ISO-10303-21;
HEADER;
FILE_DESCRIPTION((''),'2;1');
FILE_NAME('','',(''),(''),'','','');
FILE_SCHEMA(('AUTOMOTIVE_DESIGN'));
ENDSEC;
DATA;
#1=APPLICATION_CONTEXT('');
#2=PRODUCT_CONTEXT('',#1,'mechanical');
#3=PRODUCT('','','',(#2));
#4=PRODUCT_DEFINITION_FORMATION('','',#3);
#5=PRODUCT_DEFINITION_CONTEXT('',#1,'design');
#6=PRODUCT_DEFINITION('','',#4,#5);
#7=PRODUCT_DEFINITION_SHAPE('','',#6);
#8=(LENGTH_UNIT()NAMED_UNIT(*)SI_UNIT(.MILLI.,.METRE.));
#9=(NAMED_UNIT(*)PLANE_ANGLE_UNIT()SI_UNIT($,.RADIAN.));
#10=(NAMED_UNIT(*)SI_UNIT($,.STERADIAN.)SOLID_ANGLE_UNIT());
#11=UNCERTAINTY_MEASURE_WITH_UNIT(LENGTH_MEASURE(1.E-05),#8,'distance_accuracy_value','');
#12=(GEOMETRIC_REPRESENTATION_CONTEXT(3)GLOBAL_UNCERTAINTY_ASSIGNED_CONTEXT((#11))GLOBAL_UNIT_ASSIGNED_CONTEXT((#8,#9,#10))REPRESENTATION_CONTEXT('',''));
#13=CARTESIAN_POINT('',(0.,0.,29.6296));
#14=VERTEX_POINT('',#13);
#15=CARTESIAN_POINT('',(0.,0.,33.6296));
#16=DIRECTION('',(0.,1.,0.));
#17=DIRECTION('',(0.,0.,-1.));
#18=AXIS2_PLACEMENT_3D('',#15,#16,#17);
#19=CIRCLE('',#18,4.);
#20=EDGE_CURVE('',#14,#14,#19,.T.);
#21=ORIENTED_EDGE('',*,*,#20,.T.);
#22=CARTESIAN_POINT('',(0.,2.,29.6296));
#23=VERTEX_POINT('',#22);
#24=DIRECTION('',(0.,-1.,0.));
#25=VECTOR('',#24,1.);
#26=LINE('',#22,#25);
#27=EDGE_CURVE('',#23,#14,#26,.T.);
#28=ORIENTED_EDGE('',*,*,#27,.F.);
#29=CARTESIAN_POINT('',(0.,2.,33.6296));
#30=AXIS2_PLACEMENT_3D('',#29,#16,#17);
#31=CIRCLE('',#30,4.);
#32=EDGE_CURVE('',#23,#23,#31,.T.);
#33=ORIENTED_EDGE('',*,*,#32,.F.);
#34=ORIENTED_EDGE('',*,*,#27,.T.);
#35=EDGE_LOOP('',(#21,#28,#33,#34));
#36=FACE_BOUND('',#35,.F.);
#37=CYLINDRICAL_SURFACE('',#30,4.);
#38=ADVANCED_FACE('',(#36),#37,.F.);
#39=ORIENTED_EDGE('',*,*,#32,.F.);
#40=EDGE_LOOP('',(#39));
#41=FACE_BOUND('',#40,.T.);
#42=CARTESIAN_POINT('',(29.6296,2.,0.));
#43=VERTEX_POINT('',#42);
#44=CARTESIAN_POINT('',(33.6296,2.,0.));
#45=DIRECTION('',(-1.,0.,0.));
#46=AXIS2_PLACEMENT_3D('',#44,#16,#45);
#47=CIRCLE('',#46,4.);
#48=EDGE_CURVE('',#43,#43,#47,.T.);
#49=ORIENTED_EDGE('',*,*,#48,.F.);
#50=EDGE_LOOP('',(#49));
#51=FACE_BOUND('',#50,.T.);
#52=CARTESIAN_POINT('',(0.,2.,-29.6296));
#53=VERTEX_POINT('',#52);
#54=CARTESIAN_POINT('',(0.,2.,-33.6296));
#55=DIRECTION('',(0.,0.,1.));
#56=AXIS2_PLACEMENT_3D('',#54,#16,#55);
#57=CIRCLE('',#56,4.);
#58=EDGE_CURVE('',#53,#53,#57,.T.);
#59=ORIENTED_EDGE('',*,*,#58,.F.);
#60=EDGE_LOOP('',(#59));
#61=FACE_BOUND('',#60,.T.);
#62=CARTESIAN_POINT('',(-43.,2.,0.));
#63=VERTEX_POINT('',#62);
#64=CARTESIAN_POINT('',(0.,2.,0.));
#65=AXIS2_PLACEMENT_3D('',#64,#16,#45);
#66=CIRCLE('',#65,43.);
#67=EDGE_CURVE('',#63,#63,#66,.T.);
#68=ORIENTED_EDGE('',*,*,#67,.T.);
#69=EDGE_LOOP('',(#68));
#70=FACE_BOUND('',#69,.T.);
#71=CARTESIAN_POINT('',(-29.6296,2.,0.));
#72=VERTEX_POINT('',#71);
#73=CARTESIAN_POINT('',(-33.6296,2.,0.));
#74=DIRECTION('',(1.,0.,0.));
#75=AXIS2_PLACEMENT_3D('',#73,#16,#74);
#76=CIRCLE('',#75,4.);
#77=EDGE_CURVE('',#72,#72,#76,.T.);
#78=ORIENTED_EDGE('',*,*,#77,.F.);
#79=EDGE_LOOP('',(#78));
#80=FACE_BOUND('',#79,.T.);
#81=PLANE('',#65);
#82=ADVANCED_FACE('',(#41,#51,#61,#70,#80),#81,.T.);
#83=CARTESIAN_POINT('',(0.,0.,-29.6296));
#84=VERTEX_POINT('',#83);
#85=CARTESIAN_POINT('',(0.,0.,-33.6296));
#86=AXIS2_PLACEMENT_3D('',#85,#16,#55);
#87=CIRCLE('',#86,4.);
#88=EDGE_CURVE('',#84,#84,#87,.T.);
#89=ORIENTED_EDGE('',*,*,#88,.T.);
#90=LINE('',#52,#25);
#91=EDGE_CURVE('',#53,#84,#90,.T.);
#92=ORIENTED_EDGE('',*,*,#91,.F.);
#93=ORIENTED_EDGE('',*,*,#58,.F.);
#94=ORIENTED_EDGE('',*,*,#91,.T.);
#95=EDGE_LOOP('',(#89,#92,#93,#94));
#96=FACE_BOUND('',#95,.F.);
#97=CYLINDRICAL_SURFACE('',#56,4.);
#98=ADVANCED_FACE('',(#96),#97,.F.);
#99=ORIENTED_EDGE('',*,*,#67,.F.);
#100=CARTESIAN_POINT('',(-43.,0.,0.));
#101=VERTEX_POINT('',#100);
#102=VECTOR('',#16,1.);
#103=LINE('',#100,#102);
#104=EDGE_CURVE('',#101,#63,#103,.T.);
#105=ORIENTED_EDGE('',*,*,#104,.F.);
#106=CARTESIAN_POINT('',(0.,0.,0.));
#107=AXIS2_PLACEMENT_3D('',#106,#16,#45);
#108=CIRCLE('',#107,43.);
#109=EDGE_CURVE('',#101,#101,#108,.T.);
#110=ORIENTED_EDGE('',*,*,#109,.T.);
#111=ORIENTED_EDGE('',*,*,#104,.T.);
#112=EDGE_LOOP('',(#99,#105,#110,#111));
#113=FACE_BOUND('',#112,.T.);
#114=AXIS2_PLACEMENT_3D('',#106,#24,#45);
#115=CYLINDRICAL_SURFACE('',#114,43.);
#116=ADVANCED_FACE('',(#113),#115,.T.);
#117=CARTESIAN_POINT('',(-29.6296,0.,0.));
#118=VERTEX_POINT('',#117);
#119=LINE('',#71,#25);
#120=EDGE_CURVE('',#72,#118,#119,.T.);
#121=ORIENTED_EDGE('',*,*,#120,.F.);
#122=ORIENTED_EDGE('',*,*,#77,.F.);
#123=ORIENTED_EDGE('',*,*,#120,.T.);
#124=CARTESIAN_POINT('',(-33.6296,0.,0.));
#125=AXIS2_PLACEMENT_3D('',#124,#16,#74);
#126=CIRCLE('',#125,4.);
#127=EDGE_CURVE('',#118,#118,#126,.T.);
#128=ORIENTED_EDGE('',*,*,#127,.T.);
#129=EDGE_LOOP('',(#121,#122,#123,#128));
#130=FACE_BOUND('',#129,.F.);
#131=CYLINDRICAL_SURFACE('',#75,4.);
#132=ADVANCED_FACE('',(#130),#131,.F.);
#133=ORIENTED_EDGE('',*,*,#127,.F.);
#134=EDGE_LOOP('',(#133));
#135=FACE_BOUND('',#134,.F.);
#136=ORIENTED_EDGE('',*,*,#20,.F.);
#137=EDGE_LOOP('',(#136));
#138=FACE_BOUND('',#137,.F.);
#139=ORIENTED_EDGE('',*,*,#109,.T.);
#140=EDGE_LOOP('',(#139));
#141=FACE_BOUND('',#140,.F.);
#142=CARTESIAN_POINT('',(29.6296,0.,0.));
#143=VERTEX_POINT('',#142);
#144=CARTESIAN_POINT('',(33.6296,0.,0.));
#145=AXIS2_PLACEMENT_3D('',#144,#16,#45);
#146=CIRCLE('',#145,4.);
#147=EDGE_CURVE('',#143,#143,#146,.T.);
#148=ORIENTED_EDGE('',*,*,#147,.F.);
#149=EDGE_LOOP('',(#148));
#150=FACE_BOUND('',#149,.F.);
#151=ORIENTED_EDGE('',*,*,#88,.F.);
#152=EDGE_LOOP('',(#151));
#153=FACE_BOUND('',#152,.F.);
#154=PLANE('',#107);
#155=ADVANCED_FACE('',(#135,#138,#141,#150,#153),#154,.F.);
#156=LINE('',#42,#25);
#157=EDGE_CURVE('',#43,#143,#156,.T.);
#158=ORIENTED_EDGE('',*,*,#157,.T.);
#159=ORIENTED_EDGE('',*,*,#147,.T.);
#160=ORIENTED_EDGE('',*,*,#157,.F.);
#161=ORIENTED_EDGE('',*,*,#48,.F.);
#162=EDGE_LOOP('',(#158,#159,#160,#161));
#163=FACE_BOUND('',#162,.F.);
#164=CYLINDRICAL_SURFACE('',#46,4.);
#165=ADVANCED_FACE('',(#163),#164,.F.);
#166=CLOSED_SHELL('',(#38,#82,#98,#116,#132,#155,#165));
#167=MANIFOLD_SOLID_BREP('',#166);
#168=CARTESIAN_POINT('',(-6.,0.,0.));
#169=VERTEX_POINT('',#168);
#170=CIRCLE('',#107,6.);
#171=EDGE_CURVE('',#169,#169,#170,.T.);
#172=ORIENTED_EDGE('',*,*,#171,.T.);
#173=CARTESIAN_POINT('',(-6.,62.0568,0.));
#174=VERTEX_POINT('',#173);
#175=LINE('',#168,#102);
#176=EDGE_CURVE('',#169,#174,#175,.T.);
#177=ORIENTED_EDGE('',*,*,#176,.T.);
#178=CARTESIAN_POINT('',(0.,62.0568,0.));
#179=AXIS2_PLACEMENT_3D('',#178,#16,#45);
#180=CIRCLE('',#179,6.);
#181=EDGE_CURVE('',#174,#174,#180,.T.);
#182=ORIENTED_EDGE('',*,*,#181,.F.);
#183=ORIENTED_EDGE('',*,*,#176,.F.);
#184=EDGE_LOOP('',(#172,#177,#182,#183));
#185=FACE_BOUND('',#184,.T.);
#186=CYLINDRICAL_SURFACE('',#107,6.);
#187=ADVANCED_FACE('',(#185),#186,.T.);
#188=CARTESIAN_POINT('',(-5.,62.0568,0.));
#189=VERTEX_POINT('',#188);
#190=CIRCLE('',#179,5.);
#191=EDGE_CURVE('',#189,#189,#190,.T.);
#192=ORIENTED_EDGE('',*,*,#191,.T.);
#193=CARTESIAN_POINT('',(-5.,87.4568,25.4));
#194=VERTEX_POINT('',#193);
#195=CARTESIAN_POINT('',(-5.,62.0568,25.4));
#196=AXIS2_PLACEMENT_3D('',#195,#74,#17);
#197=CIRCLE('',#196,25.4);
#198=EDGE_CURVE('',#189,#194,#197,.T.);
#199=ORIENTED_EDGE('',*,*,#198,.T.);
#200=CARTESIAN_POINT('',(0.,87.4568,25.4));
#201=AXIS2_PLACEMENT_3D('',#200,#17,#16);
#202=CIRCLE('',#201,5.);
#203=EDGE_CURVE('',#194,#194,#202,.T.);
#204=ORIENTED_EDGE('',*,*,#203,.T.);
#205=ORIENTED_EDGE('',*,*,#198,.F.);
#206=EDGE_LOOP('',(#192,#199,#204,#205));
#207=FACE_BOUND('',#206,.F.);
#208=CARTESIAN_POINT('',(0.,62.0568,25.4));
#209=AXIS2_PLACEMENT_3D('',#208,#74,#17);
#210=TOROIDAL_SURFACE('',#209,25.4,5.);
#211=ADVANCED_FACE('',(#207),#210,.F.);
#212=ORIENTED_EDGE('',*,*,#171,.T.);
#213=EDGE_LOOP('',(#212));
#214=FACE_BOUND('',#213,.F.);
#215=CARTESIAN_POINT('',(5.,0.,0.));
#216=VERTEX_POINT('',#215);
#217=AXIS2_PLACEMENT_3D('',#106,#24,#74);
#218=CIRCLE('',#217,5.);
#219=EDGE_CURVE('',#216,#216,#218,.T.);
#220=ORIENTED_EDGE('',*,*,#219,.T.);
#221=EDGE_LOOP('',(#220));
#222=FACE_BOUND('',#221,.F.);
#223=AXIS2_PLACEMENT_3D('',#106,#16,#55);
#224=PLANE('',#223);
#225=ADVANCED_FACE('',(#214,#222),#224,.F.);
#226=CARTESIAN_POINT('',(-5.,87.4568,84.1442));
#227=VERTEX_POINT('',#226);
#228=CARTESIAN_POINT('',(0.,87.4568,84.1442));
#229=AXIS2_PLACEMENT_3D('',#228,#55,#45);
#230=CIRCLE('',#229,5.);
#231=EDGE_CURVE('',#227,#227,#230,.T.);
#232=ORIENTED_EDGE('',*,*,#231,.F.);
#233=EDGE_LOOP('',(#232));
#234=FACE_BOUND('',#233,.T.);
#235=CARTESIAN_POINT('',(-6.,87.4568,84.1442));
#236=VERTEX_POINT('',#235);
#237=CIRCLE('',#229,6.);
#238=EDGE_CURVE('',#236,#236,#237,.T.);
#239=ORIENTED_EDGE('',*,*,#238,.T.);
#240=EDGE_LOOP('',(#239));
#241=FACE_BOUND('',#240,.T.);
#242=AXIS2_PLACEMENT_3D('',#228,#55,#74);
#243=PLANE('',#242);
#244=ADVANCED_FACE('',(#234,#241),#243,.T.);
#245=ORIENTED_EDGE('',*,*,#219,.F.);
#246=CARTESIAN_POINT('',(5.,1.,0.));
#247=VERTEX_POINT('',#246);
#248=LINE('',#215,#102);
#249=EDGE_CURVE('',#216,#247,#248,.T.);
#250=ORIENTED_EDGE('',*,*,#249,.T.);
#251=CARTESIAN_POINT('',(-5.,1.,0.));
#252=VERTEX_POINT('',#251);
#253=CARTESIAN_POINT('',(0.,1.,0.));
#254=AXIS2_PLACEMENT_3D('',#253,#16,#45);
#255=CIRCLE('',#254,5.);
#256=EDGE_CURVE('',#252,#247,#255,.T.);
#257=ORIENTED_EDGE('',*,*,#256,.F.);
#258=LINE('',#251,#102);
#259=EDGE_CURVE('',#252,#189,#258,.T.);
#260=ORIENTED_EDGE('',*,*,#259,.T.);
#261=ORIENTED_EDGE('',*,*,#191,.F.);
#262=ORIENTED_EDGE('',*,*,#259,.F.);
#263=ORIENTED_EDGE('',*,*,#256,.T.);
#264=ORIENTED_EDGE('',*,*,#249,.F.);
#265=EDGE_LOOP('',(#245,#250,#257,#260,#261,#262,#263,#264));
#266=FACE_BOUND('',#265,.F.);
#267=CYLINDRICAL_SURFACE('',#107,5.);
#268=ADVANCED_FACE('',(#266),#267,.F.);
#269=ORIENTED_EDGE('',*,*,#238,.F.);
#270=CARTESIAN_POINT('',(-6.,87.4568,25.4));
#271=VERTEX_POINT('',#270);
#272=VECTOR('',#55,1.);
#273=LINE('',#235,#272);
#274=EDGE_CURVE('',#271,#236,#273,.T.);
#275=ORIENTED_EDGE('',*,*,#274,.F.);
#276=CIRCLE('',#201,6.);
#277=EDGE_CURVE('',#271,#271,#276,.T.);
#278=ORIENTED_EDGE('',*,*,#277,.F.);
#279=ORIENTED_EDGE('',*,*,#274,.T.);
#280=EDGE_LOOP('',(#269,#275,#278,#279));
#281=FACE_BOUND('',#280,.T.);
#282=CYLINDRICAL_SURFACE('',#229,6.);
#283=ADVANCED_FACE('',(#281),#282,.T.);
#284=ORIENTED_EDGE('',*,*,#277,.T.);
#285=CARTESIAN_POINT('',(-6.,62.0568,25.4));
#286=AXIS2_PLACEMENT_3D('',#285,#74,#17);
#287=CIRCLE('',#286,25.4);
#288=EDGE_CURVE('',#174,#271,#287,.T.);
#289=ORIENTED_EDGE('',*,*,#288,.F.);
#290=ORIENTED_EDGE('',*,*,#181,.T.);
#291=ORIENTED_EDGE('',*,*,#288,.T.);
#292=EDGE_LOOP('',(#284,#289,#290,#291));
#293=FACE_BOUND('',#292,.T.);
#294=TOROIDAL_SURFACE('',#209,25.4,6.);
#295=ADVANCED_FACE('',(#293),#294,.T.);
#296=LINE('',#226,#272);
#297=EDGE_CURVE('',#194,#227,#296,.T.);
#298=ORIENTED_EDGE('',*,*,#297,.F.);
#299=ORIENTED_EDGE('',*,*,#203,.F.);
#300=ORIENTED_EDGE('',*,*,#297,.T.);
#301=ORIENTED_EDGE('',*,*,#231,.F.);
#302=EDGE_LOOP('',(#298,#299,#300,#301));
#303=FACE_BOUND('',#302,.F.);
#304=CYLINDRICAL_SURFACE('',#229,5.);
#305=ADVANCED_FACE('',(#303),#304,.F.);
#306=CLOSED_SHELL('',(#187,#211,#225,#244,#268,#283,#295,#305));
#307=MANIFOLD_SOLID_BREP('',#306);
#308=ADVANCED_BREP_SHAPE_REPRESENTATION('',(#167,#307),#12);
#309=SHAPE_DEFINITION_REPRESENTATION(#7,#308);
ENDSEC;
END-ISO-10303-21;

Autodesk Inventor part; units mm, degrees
ref_plane "YZ Plane" through (0, 0, 0) normal (1, 0, 0) x (0, 1, 0)
ref_plane "XZ Plane" through (0, 0, 0) normal (0, 1, 0) x (-1, 0, 0)
sketch "Sketch1" plane through (0, 0, 0) normal (0, 1, 0) x (-1, 0, 0)
  circle A0 centre (0, 0) radius 43
  dimension "d0" = 86
extrude "Extrusion1" add sketch "Sketch1" along normal blind 2
sketch "Sketch2" plane through (0, 2, 0) normal (0, 1, 0) x (1, 0, 0)
  circle A0 centre (-33.6296, 0) radius 4
  point P0 (0, 0)
  dimension "d3" = 8
  dimension "d4" = 33.6296
extrude "Extrusion2" cut sketch "Sketch2" against normal blind 2
pattern_circular "Circular Pattern1" count 4 over 360 about axis through (0, 0, 0) along (0, 1, 0) of "Extrusion2"
sketch "Sketch3" plane through (0, 2, 0) normal (0, 1, 0) x (1, 0, 0)
  point P0 (0, 0)
sketch "Sketch4" plane through (0, 0, 0) normal (1, 0, 0) x (0, 1, 0)
  line L0 (0, 0) -> (62.0568, 0)
  line L1 (87.4568, 84.1442) -> (87.4568, 25.4)
  arc A0 (62.0568, 0) -> (87.4568, 25.4) centre (62.0568, 25.4) ccw
  point P0 (87.4568, 0)
  dimension "d18" = 25.4
ref_plane "Work Plane1" through (0, 2, 0) normal (0, 1, 0) x (-1, 0, 0)
sketch "Sketch5" plane through (0, 2, 0) normal (0, 1, 0) x (-1, 0, 0)
  circle A0 centre (0, 0) radius 5
  circle A1 centre (0, 0) radius 6
  dimension "d11" = 10
  dimension "d12" = 1
sweep "Sweep1" add profiles "Sketch5" path "Sketch4" separate body contours A0 | A1
shell "Shell1" thickness 1 removed faces 1 at (0.2643, 86.4344, 84.1442) bodies 2
sketch "Sketch6" plane through (0, 0, 0) normal (0, -1, 0) x (1, 0, 0)
  circle A0 centre (0, 0) radius 6 projected
  circle A1 centre (0, 0) radius 5
extrude "Extrusion3" cut sketch "Sketch6" against normal blind 41.275 contours A1 bodies 2
properties part number "fractionating_column_cover"
